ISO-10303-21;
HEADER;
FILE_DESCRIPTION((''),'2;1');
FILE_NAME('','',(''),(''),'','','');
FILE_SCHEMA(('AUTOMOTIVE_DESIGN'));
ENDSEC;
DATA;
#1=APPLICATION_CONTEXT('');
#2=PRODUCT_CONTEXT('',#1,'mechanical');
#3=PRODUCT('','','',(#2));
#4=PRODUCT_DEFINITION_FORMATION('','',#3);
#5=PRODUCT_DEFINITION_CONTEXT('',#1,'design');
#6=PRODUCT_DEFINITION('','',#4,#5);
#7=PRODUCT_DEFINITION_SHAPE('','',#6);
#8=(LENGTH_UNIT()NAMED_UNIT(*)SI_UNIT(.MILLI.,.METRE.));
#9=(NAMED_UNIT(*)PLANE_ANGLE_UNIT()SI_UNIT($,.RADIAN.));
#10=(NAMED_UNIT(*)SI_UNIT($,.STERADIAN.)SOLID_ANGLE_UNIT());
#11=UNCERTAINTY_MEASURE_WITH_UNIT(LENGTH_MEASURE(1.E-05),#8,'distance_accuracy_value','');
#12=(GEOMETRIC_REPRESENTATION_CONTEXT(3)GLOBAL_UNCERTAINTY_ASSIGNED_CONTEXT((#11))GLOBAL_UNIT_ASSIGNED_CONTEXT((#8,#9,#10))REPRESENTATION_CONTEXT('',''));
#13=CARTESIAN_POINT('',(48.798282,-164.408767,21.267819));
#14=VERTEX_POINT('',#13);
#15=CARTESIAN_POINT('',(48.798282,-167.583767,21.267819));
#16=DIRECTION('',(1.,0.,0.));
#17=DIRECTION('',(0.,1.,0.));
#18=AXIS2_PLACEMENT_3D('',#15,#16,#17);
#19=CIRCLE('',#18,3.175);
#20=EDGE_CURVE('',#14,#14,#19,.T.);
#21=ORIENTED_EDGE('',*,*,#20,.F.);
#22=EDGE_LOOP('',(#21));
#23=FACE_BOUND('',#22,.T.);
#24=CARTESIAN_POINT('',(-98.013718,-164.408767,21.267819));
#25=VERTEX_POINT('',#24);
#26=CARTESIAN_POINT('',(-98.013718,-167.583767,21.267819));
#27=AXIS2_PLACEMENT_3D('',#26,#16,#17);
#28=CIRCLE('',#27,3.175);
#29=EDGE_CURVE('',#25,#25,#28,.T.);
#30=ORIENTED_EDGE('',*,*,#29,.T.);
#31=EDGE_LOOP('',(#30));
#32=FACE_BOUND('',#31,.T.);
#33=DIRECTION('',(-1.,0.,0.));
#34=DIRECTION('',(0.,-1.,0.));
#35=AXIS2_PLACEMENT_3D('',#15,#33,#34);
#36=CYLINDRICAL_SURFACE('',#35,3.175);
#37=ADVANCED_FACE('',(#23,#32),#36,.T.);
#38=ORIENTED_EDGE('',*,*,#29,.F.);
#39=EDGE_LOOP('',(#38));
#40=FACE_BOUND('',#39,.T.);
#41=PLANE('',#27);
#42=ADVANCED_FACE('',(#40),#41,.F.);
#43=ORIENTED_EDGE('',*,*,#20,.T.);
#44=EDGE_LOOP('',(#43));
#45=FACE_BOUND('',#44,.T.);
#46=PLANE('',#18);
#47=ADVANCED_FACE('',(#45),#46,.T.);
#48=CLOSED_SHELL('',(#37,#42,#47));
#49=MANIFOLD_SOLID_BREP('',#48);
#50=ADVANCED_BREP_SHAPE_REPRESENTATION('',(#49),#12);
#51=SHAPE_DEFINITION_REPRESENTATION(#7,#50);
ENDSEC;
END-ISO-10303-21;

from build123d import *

# Parameters (mm, degrees)
BOSS_EXTRUDE2_OUTLINE_R = 3.175
BOSS_EXTRUDE2_DEPTH     = 146.812


# Read off the part's stored shape, not the designer's step: Boss-Extrude2
with BuildPart() as part:
    # Boss-Extrude2 outline → Boss-Extrude2 (new body)
    with BuildSketch(Plane(origin=(-98.013718438, 0, 0), x_dir=(0, 0, -1), z_dir=(1, 0, 0))):
        with Locations((-21.267819308, -167.583767489)):
            Circle(BOSS_EXTRUDE2_OUTLINE_R)
    extrude(amount=BOSS_EXTRUDE2_DEPTH)


solid = part.part
